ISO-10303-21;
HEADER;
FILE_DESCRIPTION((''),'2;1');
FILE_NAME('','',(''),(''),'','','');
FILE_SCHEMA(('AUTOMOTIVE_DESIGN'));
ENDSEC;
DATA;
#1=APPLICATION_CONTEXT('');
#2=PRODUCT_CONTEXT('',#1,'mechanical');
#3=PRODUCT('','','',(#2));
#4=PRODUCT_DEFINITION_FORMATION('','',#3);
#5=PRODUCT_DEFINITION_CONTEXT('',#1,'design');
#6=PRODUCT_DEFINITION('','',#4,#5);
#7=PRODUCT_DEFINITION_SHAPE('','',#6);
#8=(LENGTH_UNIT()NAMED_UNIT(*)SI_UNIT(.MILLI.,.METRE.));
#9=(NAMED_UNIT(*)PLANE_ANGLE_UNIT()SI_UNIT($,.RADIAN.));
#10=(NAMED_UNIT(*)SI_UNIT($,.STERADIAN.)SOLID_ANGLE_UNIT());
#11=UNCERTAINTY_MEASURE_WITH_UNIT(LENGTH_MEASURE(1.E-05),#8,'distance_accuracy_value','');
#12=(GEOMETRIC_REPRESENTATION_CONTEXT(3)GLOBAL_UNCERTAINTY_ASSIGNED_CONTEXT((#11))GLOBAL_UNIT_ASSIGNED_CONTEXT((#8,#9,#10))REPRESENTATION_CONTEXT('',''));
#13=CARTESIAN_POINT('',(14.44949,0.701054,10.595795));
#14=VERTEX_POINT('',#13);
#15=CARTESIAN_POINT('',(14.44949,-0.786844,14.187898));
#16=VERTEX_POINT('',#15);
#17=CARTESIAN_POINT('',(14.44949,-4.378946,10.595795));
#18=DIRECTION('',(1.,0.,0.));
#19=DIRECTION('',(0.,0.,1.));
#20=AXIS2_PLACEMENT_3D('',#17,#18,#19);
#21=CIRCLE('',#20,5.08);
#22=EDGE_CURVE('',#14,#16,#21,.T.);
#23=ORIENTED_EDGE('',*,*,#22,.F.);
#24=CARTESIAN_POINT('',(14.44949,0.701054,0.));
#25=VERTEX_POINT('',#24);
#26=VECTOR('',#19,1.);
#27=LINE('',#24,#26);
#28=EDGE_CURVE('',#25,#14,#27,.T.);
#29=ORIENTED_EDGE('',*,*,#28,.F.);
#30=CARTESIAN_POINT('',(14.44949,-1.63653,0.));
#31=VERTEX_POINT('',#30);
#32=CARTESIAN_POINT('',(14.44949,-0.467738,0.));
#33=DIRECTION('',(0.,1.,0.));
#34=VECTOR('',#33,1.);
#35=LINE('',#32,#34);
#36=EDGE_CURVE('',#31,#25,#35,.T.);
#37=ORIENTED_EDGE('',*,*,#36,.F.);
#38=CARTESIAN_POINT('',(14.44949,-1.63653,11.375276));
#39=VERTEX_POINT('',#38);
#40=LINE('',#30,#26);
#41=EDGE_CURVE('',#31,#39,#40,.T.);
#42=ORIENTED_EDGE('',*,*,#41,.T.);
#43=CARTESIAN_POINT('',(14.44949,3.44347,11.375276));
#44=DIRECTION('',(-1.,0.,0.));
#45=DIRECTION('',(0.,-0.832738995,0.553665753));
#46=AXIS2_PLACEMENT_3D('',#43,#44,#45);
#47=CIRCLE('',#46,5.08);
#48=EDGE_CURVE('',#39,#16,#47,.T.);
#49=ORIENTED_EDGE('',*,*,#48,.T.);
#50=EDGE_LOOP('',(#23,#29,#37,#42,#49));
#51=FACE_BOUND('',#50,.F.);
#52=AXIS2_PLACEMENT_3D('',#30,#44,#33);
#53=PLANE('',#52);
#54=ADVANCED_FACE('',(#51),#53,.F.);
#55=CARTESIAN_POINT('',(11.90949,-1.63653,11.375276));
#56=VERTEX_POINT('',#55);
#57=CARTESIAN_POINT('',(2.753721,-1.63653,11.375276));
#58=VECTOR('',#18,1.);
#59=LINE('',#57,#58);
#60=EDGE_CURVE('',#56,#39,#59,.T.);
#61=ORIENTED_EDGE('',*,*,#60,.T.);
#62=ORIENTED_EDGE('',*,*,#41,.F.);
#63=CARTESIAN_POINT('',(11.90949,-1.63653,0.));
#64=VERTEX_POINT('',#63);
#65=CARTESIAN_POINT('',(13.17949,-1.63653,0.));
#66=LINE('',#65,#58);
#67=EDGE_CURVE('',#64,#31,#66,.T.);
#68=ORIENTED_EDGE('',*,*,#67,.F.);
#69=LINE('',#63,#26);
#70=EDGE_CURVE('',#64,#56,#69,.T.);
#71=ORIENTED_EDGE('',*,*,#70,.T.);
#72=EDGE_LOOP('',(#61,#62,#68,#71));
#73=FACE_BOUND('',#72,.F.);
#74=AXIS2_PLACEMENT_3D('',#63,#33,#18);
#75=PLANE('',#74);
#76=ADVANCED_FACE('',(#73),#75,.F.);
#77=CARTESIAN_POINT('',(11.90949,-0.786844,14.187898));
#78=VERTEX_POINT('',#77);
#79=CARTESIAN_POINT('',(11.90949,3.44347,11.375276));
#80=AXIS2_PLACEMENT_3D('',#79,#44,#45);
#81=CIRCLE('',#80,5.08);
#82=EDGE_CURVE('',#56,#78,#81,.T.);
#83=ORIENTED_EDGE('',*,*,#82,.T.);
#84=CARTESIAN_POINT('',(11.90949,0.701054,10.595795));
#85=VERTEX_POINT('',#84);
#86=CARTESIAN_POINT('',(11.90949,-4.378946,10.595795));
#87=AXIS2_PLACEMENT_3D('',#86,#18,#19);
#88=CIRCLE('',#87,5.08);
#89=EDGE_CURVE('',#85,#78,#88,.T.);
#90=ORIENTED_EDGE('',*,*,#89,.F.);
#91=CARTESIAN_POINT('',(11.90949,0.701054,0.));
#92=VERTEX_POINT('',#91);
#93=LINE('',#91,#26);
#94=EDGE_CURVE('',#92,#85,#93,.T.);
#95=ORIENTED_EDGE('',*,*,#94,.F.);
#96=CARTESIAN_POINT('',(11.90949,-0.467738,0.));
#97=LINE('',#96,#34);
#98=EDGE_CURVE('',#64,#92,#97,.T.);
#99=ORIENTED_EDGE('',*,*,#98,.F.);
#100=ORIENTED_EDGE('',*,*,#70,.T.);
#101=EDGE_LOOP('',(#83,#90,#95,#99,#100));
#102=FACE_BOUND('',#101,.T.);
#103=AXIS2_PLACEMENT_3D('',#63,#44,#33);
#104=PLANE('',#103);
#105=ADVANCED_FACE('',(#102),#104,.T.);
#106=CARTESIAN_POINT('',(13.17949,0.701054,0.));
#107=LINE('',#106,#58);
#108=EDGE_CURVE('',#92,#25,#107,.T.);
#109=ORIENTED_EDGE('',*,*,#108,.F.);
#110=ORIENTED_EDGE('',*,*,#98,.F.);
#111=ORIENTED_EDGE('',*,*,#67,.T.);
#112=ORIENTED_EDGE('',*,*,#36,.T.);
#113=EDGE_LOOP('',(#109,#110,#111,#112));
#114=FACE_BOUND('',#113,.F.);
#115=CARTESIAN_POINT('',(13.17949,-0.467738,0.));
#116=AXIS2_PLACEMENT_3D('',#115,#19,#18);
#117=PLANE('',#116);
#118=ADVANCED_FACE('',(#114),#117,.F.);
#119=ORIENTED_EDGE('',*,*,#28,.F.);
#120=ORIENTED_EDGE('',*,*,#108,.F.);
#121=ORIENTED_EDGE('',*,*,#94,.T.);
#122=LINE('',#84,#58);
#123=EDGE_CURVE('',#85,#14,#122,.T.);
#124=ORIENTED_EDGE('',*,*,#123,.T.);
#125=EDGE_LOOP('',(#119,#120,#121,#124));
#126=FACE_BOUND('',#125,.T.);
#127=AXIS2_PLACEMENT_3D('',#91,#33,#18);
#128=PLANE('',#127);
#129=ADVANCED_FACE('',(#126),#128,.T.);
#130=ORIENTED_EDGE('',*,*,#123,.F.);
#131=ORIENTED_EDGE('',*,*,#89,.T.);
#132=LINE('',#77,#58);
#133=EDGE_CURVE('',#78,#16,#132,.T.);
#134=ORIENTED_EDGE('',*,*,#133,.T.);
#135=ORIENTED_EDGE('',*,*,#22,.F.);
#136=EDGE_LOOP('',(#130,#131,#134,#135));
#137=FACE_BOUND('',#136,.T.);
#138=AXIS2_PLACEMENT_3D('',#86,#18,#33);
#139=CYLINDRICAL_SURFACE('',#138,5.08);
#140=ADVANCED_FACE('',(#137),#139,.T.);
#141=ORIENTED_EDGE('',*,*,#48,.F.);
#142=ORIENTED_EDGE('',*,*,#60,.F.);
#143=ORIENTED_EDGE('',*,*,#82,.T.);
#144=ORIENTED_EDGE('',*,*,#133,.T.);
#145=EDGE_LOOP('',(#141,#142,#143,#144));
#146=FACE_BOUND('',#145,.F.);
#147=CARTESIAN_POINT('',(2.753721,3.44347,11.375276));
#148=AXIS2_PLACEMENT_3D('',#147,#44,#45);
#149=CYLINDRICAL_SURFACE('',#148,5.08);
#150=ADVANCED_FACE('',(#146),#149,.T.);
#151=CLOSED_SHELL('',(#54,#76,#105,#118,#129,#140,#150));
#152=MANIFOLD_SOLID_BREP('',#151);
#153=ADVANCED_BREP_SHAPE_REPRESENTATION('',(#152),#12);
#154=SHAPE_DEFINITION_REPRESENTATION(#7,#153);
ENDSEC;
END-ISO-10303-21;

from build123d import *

# Parameters (mm, degrees)
F0_W        = 2.54
F0_H        = 2.3375834556
F1_DEPTH    = 25.4
F2_T1_DEPTH = 67.8607478943
F3_R        = 5.08
F4_T1_DEPTH = 20.8515396399


# Not quite as in the source:
# - a fillet or chamfer that OpenCascade refuses, or shapes differently, is made with other operations: its cross-section is extruded or revolved along the edge and cut away or added


with BuildPart() as f1:
    # F0 (on Top) → F1 (new body)
    with BuildSketch(Plane.XY):
        with Locations((13.1794903427, -0.4677381366)):
            Rectangle(F0_W, F0_H)
    extrude(amount=F1_DEPTH)

    # F2: chamfer of 12.7 on 1 edges, made by hand

    # F2_s2 → F2_t1 (cut)
    with BuildSketch(Plane.YZ.offset(-20.7508836044)):
        Polygon((0.7010535912, 12.7), (-11.9989464088, 25.4), (0.7010535912, 25.4), align=None)
    extrude(amount=F2_T1_DEPTH, mode=Mode.SUBTRACT)

    # F3
    f3_edges = [f1.edges().sort_by_distance(p)[0] for p in [
        (13.17949, 0.701054, 12.7),
    ]]
    fillet(f3_edges, radius=F3_R)

    # F4: fillet of radius 5.08 on 1 edges, made by hand

    # F4_s2 → F4_t1 (cut)
    with BuildSketch(Plane.YZ.offset(2.7537205228)):
        with BuildLine():
            ThreePointArc((-0.7868439604, 14.1878975516), (-1.4194711353, 12.8443576208), (-1.6365298645, 11.3752755277))
            Line((-1.6365298645, 11.3752755277), (-1.6365298645, 15.0375834557))
            Line((-1.6365298645, 15.0375834557), (-0.7868439604, 14.1878975516))
        make_face()
    extrude(amount=F4_T1_DEPTH, mode=Mode.SUBTRACT)


solid = f1.part
